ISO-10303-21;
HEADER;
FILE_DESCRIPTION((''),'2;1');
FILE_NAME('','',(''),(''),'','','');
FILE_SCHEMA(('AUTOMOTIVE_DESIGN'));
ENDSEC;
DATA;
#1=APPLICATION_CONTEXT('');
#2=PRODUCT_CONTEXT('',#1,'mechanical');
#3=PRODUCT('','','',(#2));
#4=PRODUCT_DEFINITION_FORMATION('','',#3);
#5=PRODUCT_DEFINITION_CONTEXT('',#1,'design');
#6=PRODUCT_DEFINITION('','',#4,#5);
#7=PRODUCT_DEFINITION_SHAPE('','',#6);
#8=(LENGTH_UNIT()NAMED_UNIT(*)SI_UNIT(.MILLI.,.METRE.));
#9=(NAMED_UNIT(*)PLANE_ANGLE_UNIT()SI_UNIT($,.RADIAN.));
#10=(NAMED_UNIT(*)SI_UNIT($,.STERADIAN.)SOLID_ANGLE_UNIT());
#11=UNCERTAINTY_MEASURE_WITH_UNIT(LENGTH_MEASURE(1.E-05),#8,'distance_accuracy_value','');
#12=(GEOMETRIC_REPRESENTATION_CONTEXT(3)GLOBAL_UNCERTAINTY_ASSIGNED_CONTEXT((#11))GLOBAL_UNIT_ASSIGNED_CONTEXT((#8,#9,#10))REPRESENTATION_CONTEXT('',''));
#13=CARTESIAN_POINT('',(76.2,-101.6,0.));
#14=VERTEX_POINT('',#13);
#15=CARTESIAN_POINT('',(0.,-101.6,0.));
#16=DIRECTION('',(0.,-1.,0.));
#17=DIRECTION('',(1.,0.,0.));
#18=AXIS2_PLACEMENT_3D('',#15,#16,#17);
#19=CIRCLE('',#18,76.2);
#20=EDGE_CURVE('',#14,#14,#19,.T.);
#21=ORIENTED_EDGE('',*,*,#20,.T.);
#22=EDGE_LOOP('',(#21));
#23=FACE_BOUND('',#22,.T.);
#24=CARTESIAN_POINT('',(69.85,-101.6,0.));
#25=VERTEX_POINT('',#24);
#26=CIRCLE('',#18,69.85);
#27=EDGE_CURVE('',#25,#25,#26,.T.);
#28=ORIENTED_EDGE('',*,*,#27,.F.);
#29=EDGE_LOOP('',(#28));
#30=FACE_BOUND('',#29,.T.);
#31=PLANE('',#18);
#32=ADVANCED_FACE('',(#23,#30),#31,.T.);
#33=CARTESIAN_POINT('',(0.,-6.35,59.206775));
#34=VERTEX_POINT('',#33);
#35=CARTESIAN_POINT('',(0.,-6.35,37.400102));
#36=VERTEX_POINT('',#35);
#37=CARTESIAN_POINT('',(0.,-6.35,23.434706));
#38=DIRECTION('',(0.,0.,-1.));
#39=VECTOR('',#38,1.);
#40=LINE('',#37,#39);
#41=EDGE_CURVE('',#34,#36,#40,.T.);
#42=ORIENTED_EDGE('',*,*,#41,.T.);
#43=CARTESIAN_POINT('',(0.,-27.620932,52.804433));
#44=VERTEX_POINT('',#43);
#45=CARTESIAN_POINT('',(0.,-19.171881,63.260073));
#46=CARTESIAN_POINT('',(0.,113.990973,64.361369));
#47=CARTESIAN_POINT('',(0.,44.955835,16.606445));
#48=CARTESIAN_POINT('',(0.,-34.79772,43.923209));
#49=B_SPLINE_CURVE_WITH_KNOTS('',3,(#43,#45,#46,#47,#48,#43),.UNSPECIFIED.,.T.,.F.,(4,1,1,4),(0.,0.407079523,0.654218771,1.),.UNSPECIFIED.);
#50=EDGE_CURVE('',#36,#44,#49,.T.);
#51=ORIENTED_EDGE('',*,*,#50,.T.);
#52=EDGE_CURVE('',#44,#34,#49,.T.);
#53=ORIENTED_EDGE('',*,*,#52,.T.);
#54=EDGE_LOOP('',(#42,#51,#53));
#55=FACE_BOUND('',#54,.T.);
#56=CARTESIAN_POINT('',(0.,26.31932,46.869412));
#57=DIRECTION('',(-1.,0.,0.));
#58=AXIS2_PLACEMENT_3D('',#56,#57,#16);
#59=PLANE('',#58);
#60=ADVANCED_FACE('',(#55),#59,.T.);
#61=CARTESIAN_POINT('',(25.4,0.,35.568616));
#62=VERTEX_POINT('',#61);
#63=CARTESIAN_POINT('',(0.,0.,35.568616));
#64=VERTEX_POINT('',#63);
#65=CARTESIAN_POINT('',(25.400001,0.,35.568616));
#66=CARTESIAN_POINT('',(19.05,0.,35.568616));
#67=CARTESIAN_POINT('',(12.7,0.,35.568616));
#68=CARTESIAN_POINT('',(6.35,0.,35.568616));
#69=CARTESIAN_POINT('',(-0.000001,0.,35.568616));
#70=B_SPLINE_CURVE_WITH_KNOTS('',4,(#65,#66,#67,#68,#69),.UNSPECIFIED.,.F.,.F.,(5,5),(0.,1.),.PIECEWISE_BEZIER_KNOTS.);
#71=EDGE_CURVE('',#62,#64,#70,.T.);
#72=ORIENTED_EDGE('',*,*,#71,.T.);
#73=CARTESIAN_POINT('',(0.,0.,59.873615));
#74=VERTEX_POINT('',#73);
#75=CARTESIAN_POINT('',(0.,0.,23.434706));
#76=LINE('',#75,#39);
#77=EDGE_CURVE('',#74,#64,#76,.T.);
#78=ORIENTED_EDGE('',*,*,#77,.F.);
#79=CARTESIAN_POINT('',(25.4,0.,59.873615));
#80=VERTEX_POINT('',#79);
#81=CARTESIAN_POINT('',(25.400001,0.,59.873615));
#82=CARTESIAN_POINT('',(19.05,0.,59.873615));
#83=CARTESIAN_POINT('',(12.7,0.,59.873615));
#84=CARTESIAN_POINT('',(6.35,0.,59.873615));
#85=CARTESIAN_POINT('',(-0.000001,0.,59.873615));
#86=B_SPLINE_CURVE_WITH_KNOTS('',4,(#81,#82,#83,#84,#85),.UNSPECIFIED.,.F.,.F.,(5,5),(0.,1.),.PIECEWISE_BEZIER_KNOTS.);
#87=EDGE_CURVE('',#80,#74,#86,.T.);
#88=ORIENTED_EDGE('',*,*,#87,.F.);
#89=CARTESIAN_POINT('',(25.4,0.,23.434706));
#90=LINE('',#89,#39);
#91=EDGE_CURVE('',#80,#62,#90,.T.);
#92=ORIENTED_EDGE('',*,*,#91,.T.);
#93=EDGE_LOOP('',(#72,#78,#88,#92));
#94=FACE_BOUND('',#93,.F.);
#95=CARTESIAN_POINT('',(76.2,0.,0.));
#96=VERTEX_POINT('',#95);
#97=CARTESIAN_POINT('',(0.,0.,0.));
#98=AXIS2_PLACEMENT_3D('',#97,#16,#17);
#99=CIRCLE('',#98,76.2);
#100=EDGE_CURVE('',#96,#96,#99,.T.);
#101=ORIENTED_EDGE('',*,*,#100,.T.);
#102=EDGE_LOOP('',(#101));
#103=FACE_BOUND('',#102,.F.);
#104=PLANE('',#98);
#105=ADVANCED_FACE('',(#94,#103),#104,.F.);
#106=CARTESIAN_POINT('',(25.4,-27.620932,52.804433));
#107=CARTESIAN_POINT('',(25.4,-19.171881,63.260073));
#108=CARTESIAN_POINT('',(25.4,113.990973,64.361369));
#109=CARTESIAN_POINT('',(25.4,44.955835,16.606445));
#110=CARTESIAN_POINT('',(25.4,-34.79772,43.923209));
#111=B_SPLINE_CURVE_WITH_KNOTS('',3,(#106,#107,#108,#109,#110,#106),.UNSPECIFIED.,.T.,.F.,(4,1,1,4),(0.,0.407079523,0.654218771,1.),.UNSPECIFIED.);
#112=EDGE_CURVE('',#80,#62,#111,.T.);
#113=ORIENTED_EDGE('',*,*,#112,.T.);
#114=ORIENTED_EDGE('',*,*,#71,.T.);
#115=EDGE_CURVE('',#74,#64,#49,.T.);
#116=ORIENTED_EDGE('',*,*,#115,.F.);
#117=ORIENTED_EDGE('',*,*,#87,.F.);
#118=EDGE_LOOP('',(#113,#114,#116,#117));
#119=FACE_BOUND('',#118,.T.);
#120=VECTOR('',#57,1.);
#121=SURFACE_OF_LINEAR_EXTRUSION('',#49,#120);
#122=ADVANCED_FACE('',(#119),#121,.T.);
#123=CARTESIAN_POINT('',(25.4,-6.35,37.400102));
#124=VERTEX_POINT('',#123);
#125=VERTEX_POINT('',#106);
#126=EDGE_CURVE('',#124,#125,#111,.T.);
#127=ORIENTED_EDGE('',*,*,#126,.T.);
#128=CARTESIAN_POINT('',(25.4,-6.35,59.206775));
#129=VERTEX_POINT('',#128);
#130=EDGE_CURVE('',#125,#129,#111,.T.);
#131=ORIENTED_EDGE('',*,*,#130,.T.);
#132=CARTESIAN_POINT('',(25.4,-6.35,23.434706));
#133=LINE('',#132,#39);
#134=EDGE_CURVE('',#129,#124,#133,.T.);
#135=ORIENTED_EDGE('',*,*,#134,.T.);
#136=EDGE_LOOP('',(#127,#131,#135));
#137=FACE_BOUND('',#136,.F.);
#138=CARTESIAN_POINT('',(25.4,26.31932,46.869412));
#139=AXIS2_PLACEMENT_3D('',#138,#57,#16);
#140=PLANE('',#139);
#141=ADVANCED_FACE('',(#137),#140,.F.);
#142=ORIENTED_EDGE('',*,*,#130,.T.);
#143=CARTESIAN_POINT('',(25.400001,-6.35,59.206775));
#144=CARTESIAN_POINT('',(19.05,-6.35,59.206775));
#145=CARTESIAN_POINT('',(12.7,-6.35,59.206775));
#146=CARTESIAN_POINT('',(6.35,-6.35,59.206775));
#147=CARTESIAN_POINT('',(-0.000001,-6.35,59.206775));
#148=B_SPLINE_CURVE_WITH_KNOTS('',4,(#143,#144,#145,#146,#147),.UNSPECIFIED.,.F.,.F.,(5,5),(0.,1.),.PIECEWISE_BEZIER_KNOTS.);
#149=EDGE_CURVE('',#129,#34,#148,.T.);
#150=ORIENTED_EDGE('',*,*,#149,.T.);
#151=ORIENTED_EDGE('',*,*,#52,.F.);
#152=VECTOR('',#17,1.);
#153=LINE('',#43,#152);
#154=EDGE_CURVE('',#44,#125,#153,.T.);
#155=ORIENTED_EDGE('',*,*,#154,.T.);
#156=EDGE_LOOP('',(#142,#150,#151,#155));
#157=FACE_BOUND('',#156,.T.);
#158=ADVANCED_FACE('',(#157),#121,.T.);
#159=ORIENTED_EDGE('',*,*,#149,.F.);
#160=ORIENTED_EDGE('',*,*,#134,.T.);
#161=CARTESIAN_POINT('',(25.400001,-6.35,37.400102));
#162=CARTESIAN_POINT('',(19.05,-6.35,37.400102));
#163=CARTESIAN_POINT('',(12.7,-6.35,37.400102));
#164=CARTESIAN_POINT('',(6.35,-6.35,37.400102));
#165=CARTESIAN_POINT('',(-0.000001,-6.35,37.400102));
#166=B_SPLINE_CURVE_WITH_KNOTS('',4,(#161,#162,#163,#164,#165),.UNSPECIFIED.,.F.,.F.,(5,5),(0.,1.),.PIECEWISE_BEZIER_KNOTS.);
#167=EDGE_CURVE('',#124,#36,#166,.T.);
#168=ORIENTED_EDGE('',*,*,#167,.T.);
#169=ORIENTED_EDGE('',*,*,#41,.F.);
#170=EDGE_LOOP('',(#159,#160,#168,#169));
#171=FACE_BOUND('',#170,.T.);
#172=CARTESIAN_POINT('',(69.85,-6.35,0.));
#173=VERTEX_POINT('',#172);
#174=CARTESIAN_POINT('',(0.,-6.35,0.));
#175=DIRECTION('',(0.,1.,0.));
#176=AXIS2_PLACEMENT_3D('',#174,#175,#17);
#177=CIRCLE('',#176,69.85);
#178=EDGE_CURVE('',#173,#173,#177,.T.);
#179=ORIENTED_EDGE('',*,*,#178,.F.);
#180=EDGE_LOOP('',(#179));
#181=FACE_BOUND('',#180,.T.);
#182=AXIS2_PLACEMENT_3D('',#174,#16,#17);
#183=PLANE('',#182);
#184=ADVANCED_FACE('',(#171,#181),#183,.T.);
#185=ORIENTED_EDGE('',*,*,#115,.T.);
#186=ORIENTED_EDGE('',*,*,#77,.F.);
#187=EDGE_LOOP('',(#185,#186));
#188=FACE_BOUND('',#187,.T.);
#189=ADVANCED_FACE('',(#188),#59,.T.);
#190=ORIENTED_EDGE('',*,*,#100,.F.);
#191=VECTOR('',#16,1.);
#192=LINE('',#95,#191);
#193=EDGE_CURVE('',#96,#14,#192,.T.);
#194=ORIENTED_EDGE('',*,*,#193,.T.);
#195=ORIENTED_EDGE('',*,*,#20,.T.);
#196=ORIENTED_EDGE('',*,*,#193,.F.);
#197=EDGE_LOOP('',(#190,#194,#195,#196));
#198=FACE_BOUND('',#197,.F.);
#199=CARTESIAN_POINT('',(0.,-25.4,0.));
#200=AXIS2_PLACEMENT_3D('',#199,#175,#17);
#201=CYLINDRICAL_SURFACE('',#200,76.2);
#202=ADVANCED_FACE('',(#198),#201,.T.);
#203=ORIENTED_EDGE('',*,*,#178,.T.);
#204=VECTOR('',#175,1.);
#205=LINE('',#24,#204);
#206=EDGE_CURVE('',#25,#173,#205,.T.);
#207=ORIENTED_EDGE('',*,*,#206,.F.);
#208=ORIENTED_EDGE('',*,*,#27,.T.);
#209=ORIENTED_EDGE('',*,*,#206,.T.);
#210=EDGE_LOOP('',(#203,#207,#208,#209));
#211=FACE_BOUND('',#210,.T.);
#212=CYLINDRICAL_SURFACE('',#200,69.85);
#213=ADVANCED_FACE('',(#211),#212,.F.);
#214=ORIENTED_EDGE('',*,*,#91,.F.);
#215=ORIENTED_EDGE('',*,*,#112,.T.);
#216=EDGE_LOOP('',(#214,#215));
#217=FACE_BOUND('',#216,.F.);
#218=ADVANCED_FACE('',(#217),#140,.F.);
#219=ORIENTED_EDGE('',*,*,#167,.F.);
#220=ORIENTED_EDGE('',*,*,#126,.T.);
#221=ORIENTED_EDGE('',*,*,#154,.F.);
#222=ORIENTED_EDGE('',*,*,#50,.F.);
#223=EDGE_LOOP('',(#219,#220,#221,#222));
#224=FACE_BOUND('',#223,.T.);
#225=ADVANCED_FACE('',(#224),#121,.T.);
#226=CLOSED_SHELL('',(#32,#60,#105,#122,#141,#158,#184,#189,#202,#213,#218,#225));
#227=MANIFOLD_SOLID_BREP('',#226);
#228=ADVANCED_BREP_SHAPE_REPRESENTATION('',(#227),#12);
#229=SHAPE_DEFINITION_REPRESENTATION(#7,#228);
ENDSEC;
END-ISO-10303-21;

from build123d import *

# Parameters (mm, degrees)
F0_R     = 76.2
F0_R_2   = 69.85
F1_DEPTH = 25.4
F2_DEPTH = 76.2
F3_R     = 70.0511515775
F4_DEPTH = 6.35
F6_DEPTH = 25.4


with BuildPart() as f1:
    # F0 (on Front) → F1 (new body)
    with BuildSketch(Plane.XZ):
        Circle(F0_R)
        Circle(F0_R_2, mode=Mode.SUBTRACT)
    extrude(amount=F1_DEPTH)

    # F2 (add): a face of the model
    f2_faces = [f1.faces().sort_by_distance(p)[0] for p in [
        (-74.0447385309, -25.4, 0),
    ]]
    extrude(f2_faces, amount=F2_DEPTH)

    # F3 (on Front) → F4 (join)
    with BuildSketch(Plane.XZ):
        Circle(F3_R)
    extrude(amount=F4_DEPTH)

    # F5 (on Right) → F6 (join)
    with BuildSketch(Plane.YZ):
        with BuildLine():
            add(Edge.make_bspline(
                [(-27.6209320873, 52.8044328094), (-19.1718805943, 63.260073286), (113.9909728332, 64.3613693038), (44.95583544, 16.606444594), (-34.7977200102, 43.9232093535), (-27.6209320873, 52.8044328094)],
                knots=[0, 0, 0, 0, 0.4070795235, 0.6542187711, 1, 1, 1, 1], degree=3))
        make_face()
    extrude(amount=F6_DEPTH)


solid = f1.part
